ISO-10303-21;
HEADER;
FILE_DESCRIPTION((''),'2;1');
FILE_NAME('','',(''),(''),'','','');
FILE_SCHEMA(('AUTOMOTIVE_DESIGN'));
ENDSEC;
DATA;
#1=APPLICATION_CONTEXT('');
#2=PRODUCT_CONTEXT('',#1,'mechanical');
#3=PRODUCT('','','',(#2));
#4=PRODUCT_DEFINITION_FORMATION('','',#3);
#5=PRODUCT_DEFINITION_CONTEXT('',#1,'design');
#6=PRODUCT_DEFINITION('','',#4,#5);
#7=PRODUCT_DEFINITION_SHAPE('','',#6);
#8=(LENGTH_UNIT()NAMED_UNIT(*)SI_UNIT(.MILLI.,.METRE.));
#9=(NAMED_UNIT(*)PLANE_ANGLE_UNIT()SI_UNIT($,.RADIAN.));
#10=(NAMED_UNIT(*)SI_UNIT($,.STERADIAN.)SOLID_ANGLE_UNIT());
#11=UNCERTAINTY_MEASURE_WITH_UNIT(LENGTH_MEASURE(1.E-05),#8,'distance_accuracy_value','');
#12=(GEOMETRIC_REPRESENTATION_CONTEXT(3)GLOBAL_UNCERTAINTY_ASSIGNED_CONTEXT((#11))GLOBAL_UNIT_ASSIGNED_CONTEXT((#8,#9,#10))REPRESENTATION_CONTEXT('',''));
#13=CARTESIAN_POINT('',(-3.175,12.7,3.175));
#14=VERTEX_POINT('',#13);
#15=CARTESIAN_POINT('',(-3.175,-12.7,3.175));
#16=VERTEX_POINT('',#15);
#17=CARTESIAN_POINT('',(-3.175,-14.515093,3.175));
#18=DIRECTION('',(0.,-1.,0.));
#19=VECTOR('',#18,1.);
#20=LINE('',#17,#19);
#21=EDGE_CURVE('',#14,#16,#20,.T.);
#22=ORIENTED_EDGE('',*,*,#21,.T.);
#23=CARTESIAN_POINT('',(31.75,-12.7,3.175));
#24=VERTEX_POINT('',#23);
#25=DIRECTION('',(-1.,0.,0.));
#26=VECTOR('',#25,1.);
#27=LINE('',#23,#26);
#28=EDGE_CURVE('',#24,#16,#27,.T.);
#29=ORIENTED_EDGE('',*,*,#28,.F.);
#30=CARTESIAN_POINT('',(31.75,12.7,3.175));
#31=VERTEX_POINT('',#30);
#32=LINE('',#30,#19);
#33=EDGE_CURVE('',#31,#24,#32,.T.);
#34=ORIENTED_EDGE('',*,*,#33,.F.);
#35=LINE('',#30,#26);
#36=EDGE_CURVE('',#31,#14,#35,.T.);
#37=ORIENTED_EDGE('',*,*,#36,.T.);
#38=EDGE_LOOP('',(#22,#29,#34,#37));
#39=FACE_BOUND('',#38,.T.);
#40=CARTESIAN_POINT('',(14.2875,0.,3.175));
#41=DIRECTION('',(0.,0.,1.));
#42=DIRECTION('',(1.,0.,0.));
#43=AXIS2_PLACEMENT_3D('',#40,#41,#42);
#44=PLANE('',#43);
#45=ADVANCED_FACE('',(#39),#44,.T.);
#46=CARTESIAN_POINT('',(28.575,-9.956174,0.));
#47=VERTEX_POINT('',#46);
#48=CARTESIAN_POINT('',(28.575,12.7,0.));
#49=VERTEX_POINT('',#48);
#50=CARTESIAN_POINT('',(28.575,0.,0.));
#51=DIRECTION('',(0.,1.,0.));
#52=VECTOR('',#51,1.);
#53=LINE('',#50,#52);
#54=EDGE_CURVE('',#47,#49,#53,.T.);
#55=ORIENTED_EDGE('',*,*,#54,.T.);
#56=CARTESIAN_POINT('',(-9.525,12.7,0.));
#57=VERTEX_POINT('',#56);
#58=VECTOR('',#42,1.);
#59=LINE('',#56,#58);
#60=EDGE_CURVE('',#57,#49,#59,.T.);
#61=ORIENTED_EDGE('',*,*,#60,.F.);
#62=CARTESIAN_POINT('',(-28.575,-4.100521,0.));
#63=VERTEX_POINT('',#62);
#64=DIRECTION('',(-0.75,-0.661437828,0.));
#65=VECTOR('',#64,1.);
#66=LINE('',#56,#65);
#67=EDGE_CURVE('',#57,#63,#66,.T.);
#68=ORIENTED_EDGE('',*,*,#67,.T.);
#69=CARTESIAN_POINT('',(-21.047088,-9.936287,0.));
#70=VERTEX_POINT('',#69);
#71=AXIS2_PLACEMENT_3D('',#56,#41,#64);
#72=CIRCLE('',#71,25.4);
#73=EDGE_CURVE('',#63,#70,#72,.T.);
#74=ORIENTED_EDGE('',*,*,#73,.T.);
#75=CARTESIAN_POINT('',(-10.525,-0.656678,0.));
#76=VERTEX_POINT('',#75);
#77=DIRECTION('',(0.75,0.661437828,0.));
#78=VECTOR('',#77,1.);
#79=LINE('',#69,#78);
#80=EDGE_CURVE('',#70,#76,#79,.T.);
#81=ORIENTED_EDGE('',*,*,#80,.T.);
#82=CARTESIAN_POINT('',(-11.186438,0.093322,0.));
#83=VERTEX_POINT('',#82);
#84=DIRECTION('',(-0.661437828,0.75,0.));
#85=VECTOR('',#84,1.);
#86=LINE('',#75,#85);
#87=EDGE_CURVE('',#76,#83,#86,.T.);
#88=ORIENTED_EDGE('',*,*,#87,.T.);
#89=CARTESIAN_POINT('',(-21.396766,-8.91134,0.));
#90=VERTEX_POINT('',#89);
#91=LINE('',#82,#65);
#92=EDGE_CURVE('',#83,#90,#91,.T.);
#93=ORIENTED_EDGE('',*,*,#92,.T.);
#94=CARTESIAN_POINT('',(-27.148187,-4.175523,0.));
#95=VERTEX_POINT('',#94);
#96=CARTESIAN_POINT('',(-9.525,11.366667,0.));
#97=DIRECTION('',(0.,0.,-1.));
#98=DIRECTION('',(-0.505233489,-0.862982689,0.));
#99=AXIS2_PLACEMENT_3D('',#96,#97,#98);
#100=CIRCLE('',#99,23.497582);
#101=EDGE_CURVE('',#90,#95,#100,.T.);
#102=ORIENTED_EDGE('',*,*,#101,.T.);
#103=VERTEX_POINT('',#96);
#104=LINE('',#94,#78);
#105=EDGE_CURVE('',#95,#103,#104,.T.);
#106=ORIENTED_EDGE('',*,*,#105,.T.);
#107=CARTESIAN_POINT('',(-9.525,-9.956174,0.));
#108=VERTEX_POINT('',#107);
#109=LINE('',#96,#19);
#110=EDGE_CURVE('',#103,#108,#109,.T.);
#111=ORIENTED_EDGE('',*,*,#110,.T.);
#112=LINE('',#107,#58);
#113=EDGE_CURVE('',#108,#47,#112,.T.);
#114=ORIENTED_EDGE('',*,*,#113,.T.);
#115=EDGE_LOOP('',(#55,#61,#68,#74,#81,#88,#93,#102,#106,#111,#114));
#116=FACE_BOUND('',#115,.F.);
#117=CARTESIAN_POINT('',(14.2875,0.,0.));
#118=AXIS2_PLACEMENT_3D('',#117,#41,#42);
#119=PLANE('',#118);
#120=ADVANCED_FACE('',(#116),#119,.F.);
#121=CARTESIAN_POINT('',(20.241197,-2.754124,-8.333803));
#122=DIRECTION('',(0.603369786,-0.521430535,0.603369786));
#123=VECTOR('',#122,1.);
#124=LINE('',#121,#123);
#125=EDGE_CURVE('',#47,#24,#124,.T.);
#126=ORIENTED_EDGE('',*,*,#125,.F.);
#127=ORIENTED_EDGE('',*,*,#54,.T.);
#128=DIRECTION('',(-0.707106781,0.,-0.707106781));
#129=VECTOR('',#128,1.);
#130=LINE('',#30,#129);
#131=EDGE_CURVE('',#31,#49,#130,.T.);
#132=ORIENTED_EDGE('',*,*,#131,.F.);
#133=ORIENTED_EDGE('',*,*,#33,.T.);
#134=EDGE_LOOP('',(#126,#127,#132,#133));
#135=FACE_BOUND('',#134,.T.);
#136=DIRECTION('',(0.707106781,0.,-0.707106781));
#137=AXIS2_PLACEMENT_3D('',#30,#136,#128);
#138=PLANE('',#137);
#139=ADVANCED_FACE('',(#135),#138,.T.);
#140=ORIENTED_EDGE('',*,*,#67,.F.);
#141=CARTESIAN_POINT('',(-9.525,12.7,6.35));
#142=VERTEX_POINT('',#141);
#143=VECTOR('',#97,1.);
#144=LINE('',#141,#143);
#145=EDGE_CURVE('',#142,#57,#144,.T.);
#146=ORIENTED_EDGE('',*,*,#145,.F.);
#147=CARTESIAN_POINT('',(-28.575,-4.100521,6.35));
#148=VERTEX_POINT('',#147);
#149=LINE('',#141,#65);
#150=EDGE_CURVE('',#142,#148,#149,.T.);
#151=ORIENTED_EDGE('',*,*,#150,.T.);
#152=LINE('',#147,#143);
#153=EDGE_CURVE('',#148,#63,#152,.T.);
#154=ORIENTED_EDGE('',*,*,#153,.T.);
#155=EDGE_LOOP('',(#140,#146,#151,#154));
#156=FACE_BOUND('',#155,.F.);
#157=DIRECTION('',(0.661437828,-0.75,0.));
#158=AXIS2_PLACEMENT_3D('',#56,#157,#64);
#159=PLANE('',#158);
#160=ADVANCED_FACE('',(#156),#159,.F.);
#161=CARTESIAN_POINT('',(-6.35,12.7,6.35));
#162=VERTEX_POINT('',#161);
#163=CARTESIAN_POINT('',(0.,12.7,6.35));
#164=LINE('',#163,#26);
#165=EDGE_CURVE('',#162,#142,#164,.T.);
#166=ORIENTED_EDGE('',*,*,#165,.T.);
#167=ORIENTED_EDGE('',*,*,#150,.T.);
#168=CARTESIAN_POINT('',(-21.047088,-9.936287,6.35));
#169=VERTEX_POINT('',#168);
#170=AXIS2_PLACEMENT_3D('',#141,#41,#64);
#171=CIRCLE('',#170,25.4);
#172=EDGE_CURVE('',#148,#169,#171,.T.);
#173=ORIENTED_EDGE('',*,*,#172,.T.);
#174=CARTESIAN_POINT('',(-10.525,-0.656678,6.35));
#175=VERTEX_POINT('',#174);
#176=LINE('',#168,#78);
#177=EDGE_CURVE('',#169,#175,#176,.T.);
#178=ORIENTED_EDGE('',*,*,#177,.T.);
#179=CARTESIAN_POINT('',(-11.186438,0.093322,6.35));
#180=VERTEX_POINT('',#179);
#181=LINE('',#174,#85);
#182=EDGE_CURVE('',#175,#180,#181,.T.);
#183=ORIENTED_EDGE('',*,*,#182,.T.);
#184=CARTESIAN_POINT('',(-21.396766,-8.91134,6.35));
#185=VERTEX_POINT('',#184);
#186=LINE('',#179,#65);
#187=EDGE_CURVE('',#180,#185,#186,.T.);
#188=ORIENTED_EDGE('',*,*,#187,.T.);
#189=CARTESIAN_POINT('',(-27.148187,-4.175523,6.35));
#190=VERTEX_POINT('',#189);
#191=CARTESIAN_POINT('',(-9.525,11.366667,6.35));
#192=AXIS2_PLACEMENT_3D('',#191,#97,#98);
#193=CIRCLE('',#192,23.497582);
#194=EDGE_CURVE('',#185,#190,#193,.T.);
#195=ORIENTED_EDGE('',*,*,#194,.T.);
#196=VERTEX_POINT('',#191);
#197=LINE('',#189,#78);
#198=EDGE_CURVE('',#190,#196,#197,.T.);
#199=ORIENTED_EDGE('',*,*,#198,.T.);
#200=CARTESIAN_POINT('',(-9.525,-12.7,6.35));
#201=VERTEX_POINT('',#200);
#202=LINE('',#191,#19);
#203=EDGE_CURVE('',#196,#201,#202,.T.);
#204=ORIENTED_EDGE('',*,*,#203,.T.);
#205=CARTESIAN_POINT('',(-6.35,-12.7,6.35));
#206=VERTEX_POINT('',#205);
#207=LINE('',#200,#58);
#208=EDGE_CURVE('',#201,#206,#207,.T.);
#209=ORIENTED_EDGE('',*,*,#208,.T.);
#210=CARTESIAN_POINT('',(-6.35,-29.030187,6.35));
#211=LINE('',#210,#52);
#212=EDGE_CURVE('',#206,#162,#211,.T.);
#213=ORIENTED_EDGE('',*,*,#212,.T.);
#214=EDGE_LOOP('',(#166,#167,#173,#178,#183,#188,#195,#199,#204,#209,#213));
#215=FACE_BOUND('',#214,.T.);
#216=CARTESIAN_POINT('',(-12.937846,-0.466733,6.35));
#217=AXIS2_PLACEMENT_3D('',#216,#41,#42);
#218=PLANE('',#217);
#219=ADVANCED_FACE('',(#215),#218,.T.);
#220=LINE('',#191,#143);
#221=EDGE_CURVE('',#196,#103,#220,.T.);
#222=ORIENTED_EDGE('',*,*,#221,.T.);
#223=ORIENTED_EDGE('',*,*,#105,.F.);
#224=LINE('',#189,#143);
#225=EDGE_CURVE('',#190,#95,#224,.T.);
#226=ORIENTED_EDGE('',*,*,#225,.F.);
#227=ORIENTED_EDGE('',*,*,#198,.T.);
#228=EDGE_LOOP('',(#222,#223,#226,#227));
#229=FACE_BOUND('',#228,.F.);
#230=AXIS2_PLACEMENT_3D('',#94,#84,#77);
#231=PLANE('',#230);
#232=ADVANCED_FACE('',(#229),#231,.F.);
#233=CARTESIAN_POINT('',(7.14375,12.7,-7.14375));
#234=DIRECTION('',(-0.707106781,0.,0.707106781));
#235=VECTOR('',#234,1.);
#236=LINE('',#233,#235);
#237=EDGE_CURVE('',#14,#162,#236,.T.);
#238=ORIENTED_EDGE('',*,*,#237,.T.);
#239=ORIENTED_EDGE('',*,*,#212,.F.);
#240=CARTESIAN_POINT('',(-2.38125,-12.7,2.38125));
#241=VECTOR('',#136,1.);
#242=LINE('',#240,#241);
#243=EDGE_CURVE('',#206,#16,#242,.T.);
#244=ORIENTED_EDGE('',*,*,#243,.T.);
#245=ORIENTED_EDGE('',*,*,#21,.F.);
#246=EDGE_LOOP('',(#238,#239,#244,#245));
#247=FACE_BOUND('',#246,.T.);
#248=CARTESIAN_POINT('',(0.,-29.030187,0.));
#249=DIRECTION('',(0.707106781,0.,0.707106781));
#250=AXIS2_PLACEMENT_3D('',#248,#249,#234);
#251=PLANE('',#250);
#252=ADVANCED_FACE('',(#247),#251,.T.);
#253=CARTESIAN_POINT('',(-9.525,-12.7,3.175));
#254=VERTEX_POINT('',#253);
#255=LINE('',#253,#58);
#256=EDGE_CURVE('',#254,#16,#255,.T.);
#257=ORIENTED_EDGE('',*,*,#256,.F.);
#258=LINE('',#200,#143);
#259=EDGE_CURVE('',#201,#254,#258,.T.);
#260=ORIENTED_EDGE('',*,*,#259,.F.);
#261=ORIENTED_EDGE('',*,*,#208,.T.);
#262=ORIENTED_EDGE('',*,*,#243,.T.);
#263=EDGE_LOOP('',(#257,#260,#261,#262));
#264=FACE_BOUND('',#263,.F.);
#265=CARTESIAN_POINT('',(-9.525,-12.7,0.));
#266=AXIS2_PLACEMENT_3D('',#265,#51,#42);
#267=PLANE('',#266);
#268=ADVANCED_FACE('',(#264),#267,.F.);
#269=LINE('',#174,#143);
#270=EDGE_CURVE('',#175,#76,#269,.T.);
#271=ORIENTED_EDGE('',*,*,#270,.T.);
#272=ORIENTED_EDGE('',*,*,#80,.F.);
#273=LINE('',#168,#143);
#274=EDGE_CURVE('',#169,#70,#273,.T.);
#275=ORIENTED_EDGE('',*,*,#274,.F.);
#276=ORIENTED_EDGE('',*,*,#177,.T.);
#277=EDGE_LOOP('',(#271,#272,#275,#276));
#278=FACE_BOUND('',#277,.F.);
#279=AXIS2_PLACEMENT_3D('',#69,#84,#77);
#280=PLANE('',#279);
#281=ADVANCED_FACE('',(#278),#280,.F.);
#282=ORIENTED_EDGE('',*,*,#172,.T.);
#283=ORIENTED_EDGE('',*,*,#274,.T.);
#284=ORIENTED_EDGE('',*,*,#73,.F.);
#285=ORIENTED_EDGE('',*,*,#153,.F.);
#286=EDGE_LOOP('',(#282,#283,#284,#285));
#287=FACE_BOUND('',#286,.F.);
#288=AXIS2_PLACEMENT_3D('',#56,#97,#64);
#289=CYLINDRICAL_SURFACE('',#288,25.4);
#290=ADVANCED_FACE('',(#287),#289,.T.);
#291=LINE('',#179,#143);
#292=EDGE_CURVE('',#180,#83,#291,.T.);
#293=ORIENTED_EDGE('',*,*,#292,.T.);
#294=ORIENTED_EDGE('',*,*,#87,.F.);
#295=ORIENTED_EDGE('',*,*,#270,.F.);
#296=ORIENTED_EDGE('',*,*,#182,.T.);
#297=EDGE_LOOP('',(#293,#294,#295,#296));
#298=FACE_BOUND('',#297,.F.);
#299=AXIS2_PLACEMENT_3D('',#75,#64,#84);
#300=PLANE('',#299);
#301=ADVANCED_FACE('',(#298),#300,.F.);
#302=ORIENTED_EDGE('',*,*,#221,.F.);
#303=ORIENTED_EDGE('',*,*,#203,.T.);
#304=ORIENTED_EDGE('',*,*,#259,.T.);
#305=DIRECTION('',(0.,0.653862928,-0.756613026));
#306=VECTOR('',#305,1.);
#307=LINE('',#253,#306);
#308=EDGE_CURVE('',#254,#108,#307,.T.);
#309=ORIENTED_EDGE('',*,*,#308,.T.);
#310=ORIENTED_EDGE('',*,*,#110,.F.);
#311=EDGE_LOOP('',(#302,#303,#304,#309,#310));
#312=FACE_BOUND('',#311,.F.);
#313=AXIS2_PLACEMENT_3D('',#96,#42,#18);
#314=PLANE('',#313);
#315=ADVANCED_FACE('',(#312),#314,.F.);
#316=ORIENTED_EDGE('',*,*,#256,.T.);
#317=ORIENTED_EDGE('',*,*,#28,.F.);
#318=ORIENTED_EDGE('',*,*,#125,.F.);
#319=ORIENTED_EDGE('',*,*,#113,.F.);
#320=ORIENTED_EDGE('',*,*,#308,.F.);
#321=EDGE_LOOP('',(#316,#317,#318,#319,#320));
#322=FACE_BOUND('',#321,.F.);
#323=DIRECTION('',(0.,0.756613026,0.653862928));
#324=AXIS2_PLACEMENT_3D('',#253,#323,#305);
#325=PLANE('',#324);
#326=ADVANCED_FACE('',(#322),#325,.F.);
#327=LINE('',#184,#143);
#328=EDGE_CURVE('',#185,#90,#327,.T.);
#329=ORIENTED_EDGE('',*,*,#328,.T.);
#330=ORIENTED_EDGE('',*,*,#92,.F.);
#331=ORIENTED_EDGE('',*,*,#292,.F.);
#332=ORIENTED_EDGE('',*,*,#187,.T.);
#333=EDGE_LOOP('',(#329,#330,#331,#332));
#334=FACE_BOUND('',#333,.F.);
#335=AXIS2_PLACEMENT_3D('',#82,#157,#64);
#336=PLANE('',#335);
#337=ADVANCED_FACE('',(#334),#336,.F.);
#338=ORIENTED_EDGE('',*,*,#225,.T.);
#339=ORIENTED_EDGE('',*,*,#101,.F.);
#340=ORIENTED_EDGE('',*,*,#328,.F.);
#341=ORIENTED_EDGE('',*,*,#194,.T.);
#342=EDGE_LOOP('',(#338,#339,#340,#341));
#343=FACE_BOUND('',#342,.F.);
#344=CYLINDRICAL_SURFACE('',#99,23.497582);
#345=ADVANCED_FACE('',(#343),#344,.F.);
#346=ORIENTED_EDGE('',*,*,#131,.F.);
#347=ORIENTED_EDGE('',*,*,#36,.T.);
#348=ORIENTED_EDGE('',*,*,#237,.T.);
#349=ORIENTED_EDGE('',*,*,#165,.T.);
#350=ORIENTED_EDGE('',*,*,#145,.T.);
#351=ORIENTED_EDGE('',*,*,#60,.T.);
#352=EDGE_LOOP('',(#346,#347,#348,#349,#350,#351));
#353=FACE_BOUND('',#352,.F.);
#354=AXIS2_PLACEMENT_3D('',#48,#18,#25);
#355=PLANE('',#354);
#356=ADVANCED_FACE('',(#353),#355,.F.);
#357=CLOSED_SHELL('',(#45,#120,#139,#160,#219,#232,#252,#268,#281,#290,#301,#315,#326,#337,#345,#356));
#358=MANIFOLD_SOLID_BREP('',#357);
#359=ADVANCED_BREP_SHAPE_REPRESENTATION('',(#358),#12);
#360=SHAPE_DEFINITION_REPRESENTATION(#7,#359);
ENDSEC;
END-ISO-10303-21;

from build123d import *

# Parameters (mm, degrees)
F0_W        = 28.575
F0_H        = 25.4
F1_DEPTH    = 3.175
F2_DEPTH    = 6.35
F3_T4_DEPTH = 58.0603739472
F6_DEPTH    = 25.4
F7_DEPTH    = 50.8


# Not quite as in the source:
# - a fillet or chamfer that OpenCascade refuses, or shapes differently, is made with other operations: its cross-section is extruded or revolved along the edge and cut away or added
# - a feature names something its author has since deleted; it is built from what else it names


with BuildPart() as f1:
    # F0 (on Top) → F1 (new body)
    with BuildSketch(Plane.XY):
        with Locations((14.2875, 0)):
            Rectangle(F0_W, F0_H)
        with BuildLine():
            Line((-9.525, -12.7), (0, -12.7))
            Line((0, -12.7), (0, 12.7))
            Line((0, 12.7), (-9.525, 12.7))
            Line((-9.525, 12.7), (-28.575, -4.1005208253))
            ThreePointArc((-28.575, -4.1005208253), (-25.0870430294, -7.374431916), (-21.0470880315, -9.9362869613))
            Line((-21.0470880315, -9.9362869613), (-10.525, -0.6566775598))
            Line((-10.525, -0.6566775598), (-11.1864378278, 0.0933224402))
            Line((-11.1864378278, 0.0933224402), (-21.3967655869, -8.9113402448))
            ThreePointArc((-21.3967655869, -8.9113402448), (-24.4613665471, -6.7728299311), (-27.1481868608, -4.1755232473))
            Line((-27.1481868608, -4.1755232473), (-9.525, 11.3666666667))
            Line((-9.525, 11.3666666667), (-9.525, -12.7))
        make_face()
    extrude(amount=F1_DEPTH)

    # F0 (on Top) → F2 (join)
    with BuildSketch(Plane.XY):
        with BuildLine():
            Line((-9.525, -12.7), (0, -12.7))
            Line((0, -12.7), (0, 12.7))
            Line((0, 12.7), (-9.525, 12.7))
            Line((-9.525, 12.7), (-28.575, -4.1005208253))
            ThreePointArc((-28.575, -4.1005208253), (-25.0870430294, -7.374431916), (-21.0470880315, -9.9362869613))
            Line((-21.0470880315, -9.9362869613), (-10.525, -0.6566775598))
            Line((-10.525, -0.6566775598), (-11.1864378278, 0.0933224402))
            Line((-11.1864378278, 0.0933224402), (-21.3967655869, -8.9113402448))
            ThreePointArc((-21.3967655869, -8.9113402448), (-24.4613665471, -6.7728299311), (-27.1481868608, -4.1755232473))
            Line((-27.1481868608, -4.1755232473), (-9.525, 11.3666666667))
            Line((-9.525, 11.3666666667), (-9.525, -12.7))
        make_face()
    extrude(amount=F2_DEPTH)

    # F3: chamfer of 6.35 on 1 edges, made by hand


with BuildPart() as f3_tool2:
    # F3_s3 → F3_t4 (new body)
    with BuildSketch(Plane.XZ.offset(29.0301869736)):
        Polygon((0, 0), (-6.35, 6.35), (0, 6.35), align=None)
    extrude(amount=-F3_T4_DEPTH)

    split(bisect_by=Plane.XY.offset(3.175), keep=Keep.TOP)


with BuildPart() as f1_1:
    add(f1.part)

    # F3_t1: cut F3_tool2
    add(f3_tool2.part, mode=Mode.SUBTRACT)

    # F5 (on face) → F6 (join)
    with BuildSketch(Plane(origin=(0, 12.7, 0), x_dir=(-1, 0, 0), z_dir=(0, 1, 0))):
        Polygon((3.175, 3.175), (-28.575, 3.175), (-28.575, 0), (9.525, 0), (9.525, 6.35), (6.35, 6.35), align=None)
        Polygon((-28.575, 0), (-28.575, 3.175), (-31.75, 3.175), align=None)
    extrude(amount=-F6_DEPTH)

    # F4 (on face) → F7 (cut)
    with BuildSketch(Plane(origin=(-9.525, 0, 0), x_dir=(0, -1, 0), z_dir=(-1, 0, 0))):
        Polygon((9.9561735988, 0), (12.7, 0), (12.7, 3.175), align=None)
    extrude(amount=-F7_DEPTH, mode=Mode.SUBTRACT)


solid = f1_1.part
